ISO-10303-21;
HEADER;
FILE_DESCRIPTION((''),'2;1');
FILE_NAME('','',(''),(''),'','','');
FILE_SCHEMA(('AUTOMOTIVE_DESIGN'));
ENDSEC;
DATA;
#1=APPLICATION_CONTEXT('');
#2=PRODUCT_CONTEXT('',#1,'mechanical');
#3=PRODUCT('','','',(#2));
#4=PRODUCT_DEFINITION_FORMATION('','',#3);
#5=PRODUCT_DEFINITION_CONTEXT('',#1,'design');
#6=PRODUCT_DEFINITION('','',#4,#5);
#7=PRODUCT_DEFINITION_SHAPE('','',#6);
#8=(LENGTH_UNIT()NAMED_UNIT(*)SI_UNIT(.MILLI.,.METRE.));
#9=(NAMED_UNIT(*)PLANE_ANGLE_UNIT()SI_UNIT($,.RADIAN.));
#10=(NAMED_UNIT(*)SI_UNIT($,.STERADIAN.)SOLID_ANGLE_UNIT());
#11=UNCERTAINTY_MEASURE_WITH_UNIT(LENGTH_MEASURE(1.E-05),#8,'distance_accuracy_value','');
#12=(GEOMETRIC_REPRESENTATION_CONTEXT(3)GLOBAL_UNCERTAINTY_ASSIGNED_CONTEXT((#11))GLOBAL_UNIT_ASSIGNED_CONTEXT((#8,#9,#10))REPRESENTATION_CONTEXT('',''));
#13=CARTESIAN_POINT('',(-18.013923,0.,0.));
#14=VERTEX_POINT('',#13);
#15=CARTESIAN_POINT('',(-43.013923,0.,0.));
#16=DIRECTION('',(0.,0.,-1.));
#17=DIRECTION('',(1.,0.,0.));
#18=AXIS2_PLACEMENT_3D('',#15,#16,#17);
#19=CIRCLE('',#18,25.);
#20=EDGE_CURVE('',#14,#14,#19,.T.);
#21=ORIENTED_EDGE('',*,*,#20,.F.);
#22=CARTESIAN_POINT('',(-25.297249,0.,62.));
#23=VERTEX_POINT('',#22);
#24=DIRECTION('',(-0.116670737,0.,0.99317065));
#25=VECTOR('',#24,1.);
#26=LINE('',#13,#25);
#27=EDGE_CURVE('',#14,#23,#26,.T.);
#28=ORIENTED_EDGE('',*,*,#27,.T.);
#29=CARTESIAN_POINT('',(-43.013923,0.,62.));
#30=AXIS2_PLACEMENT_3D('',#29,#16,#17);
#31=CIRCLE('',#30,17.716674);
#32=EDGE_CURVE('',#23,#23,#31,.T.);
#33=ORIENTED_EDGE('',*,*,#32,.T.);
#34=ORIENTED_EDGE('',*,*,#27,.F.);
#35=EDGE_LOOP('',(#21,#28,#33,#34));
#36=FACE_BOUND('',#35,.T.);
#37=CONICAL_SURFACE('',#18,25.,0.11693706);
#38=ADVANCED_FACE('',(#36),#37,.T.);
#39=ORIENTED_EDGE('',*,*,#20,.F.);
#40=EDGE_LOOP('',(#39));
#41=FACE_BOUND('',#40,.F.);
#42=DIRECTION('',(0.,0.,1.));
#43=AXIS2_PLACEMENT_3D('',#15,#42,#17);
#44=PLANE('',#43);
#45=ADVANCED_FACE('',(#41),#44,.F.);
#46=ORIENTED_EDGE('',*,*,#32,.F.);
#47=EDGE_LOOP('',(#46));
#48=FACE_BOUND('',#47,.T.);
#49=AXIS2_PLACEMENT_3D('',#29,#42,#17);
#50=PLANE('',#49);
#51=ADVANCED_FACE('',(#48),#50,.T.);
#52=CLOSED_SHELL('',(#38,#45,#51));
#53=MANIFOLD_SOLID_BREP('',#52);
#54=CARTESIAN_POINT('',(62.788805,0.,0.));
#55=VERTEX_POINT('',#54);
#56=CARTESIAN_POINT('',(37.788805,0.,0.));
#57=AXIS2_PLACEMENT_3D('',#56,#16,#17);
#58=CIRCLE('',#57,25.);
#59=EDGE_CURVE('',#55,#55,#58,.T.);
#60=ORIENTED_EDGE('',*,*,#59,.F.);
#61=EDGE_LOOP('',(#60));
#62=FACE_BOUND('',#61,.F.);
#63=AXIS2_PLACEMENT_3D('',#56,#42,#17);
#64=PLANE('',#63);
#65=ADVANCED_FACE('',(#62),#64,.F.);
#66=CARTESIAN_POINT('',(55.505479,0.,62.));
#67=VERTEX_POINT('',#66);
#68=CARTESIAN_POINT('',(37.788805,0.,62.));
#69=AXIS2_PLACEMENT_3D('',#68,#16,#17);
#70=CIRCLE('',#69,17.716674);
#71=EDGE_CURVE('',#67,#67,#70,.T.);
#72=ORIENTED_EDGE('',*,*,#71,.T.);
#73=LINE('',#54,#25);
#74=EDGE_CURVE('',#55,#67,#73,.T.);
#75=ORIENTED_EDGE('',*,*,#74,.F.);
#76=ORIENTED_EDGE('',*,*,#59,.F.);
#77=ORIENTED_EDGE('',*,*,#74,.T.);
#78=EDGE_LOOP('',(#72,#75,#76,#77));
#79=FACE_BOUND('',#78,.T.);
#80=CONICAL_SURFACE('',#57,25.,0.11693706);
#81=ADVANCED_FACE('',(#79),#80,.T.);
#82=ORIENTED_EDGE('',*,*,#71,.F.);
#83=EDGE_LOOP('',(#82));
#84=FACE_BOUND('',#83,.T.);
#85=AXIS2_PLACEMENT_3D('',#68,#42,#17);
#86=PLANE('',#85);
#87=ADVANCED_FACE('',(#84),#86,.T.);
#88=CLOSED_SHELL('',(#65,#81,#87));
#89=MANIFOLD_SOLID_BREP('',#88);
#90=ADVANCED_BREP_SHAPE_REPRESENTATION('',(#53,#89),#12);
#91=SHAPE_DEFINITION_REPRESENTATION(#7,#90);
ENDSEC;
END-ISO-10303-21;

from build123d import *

# Parameters (mm, degrees)
F0_R     = 25
F1_DEPTH = 62
F1_TAPER = 6.7


# Not quite as in the source:
# - a feature of the source that left no trace in its solid (it failed there, or was rolled back) is left out


with BuildPart() as f1:
    # F0 (on Top) → F1 (new body)
    with BuildSketch(Plane.XY):
        with Locations((-43.0139228702, 0)):
            Circle(F0_R)
    extrude(amount=F1_DEPTH, taper=F1_TAPER)


with BuildPart() as f1b:
    # F0 (on Top) → F1, piece 2 (new body)
    with BuildSketch(Plane.XY):
        with Locations((37.7888046205, 0)):
            Circle(F0_R)
    extrude(amount=F1_DEPTH, taper=F1_TAPER)


solid = Compound([f1.part, f1b.part])
